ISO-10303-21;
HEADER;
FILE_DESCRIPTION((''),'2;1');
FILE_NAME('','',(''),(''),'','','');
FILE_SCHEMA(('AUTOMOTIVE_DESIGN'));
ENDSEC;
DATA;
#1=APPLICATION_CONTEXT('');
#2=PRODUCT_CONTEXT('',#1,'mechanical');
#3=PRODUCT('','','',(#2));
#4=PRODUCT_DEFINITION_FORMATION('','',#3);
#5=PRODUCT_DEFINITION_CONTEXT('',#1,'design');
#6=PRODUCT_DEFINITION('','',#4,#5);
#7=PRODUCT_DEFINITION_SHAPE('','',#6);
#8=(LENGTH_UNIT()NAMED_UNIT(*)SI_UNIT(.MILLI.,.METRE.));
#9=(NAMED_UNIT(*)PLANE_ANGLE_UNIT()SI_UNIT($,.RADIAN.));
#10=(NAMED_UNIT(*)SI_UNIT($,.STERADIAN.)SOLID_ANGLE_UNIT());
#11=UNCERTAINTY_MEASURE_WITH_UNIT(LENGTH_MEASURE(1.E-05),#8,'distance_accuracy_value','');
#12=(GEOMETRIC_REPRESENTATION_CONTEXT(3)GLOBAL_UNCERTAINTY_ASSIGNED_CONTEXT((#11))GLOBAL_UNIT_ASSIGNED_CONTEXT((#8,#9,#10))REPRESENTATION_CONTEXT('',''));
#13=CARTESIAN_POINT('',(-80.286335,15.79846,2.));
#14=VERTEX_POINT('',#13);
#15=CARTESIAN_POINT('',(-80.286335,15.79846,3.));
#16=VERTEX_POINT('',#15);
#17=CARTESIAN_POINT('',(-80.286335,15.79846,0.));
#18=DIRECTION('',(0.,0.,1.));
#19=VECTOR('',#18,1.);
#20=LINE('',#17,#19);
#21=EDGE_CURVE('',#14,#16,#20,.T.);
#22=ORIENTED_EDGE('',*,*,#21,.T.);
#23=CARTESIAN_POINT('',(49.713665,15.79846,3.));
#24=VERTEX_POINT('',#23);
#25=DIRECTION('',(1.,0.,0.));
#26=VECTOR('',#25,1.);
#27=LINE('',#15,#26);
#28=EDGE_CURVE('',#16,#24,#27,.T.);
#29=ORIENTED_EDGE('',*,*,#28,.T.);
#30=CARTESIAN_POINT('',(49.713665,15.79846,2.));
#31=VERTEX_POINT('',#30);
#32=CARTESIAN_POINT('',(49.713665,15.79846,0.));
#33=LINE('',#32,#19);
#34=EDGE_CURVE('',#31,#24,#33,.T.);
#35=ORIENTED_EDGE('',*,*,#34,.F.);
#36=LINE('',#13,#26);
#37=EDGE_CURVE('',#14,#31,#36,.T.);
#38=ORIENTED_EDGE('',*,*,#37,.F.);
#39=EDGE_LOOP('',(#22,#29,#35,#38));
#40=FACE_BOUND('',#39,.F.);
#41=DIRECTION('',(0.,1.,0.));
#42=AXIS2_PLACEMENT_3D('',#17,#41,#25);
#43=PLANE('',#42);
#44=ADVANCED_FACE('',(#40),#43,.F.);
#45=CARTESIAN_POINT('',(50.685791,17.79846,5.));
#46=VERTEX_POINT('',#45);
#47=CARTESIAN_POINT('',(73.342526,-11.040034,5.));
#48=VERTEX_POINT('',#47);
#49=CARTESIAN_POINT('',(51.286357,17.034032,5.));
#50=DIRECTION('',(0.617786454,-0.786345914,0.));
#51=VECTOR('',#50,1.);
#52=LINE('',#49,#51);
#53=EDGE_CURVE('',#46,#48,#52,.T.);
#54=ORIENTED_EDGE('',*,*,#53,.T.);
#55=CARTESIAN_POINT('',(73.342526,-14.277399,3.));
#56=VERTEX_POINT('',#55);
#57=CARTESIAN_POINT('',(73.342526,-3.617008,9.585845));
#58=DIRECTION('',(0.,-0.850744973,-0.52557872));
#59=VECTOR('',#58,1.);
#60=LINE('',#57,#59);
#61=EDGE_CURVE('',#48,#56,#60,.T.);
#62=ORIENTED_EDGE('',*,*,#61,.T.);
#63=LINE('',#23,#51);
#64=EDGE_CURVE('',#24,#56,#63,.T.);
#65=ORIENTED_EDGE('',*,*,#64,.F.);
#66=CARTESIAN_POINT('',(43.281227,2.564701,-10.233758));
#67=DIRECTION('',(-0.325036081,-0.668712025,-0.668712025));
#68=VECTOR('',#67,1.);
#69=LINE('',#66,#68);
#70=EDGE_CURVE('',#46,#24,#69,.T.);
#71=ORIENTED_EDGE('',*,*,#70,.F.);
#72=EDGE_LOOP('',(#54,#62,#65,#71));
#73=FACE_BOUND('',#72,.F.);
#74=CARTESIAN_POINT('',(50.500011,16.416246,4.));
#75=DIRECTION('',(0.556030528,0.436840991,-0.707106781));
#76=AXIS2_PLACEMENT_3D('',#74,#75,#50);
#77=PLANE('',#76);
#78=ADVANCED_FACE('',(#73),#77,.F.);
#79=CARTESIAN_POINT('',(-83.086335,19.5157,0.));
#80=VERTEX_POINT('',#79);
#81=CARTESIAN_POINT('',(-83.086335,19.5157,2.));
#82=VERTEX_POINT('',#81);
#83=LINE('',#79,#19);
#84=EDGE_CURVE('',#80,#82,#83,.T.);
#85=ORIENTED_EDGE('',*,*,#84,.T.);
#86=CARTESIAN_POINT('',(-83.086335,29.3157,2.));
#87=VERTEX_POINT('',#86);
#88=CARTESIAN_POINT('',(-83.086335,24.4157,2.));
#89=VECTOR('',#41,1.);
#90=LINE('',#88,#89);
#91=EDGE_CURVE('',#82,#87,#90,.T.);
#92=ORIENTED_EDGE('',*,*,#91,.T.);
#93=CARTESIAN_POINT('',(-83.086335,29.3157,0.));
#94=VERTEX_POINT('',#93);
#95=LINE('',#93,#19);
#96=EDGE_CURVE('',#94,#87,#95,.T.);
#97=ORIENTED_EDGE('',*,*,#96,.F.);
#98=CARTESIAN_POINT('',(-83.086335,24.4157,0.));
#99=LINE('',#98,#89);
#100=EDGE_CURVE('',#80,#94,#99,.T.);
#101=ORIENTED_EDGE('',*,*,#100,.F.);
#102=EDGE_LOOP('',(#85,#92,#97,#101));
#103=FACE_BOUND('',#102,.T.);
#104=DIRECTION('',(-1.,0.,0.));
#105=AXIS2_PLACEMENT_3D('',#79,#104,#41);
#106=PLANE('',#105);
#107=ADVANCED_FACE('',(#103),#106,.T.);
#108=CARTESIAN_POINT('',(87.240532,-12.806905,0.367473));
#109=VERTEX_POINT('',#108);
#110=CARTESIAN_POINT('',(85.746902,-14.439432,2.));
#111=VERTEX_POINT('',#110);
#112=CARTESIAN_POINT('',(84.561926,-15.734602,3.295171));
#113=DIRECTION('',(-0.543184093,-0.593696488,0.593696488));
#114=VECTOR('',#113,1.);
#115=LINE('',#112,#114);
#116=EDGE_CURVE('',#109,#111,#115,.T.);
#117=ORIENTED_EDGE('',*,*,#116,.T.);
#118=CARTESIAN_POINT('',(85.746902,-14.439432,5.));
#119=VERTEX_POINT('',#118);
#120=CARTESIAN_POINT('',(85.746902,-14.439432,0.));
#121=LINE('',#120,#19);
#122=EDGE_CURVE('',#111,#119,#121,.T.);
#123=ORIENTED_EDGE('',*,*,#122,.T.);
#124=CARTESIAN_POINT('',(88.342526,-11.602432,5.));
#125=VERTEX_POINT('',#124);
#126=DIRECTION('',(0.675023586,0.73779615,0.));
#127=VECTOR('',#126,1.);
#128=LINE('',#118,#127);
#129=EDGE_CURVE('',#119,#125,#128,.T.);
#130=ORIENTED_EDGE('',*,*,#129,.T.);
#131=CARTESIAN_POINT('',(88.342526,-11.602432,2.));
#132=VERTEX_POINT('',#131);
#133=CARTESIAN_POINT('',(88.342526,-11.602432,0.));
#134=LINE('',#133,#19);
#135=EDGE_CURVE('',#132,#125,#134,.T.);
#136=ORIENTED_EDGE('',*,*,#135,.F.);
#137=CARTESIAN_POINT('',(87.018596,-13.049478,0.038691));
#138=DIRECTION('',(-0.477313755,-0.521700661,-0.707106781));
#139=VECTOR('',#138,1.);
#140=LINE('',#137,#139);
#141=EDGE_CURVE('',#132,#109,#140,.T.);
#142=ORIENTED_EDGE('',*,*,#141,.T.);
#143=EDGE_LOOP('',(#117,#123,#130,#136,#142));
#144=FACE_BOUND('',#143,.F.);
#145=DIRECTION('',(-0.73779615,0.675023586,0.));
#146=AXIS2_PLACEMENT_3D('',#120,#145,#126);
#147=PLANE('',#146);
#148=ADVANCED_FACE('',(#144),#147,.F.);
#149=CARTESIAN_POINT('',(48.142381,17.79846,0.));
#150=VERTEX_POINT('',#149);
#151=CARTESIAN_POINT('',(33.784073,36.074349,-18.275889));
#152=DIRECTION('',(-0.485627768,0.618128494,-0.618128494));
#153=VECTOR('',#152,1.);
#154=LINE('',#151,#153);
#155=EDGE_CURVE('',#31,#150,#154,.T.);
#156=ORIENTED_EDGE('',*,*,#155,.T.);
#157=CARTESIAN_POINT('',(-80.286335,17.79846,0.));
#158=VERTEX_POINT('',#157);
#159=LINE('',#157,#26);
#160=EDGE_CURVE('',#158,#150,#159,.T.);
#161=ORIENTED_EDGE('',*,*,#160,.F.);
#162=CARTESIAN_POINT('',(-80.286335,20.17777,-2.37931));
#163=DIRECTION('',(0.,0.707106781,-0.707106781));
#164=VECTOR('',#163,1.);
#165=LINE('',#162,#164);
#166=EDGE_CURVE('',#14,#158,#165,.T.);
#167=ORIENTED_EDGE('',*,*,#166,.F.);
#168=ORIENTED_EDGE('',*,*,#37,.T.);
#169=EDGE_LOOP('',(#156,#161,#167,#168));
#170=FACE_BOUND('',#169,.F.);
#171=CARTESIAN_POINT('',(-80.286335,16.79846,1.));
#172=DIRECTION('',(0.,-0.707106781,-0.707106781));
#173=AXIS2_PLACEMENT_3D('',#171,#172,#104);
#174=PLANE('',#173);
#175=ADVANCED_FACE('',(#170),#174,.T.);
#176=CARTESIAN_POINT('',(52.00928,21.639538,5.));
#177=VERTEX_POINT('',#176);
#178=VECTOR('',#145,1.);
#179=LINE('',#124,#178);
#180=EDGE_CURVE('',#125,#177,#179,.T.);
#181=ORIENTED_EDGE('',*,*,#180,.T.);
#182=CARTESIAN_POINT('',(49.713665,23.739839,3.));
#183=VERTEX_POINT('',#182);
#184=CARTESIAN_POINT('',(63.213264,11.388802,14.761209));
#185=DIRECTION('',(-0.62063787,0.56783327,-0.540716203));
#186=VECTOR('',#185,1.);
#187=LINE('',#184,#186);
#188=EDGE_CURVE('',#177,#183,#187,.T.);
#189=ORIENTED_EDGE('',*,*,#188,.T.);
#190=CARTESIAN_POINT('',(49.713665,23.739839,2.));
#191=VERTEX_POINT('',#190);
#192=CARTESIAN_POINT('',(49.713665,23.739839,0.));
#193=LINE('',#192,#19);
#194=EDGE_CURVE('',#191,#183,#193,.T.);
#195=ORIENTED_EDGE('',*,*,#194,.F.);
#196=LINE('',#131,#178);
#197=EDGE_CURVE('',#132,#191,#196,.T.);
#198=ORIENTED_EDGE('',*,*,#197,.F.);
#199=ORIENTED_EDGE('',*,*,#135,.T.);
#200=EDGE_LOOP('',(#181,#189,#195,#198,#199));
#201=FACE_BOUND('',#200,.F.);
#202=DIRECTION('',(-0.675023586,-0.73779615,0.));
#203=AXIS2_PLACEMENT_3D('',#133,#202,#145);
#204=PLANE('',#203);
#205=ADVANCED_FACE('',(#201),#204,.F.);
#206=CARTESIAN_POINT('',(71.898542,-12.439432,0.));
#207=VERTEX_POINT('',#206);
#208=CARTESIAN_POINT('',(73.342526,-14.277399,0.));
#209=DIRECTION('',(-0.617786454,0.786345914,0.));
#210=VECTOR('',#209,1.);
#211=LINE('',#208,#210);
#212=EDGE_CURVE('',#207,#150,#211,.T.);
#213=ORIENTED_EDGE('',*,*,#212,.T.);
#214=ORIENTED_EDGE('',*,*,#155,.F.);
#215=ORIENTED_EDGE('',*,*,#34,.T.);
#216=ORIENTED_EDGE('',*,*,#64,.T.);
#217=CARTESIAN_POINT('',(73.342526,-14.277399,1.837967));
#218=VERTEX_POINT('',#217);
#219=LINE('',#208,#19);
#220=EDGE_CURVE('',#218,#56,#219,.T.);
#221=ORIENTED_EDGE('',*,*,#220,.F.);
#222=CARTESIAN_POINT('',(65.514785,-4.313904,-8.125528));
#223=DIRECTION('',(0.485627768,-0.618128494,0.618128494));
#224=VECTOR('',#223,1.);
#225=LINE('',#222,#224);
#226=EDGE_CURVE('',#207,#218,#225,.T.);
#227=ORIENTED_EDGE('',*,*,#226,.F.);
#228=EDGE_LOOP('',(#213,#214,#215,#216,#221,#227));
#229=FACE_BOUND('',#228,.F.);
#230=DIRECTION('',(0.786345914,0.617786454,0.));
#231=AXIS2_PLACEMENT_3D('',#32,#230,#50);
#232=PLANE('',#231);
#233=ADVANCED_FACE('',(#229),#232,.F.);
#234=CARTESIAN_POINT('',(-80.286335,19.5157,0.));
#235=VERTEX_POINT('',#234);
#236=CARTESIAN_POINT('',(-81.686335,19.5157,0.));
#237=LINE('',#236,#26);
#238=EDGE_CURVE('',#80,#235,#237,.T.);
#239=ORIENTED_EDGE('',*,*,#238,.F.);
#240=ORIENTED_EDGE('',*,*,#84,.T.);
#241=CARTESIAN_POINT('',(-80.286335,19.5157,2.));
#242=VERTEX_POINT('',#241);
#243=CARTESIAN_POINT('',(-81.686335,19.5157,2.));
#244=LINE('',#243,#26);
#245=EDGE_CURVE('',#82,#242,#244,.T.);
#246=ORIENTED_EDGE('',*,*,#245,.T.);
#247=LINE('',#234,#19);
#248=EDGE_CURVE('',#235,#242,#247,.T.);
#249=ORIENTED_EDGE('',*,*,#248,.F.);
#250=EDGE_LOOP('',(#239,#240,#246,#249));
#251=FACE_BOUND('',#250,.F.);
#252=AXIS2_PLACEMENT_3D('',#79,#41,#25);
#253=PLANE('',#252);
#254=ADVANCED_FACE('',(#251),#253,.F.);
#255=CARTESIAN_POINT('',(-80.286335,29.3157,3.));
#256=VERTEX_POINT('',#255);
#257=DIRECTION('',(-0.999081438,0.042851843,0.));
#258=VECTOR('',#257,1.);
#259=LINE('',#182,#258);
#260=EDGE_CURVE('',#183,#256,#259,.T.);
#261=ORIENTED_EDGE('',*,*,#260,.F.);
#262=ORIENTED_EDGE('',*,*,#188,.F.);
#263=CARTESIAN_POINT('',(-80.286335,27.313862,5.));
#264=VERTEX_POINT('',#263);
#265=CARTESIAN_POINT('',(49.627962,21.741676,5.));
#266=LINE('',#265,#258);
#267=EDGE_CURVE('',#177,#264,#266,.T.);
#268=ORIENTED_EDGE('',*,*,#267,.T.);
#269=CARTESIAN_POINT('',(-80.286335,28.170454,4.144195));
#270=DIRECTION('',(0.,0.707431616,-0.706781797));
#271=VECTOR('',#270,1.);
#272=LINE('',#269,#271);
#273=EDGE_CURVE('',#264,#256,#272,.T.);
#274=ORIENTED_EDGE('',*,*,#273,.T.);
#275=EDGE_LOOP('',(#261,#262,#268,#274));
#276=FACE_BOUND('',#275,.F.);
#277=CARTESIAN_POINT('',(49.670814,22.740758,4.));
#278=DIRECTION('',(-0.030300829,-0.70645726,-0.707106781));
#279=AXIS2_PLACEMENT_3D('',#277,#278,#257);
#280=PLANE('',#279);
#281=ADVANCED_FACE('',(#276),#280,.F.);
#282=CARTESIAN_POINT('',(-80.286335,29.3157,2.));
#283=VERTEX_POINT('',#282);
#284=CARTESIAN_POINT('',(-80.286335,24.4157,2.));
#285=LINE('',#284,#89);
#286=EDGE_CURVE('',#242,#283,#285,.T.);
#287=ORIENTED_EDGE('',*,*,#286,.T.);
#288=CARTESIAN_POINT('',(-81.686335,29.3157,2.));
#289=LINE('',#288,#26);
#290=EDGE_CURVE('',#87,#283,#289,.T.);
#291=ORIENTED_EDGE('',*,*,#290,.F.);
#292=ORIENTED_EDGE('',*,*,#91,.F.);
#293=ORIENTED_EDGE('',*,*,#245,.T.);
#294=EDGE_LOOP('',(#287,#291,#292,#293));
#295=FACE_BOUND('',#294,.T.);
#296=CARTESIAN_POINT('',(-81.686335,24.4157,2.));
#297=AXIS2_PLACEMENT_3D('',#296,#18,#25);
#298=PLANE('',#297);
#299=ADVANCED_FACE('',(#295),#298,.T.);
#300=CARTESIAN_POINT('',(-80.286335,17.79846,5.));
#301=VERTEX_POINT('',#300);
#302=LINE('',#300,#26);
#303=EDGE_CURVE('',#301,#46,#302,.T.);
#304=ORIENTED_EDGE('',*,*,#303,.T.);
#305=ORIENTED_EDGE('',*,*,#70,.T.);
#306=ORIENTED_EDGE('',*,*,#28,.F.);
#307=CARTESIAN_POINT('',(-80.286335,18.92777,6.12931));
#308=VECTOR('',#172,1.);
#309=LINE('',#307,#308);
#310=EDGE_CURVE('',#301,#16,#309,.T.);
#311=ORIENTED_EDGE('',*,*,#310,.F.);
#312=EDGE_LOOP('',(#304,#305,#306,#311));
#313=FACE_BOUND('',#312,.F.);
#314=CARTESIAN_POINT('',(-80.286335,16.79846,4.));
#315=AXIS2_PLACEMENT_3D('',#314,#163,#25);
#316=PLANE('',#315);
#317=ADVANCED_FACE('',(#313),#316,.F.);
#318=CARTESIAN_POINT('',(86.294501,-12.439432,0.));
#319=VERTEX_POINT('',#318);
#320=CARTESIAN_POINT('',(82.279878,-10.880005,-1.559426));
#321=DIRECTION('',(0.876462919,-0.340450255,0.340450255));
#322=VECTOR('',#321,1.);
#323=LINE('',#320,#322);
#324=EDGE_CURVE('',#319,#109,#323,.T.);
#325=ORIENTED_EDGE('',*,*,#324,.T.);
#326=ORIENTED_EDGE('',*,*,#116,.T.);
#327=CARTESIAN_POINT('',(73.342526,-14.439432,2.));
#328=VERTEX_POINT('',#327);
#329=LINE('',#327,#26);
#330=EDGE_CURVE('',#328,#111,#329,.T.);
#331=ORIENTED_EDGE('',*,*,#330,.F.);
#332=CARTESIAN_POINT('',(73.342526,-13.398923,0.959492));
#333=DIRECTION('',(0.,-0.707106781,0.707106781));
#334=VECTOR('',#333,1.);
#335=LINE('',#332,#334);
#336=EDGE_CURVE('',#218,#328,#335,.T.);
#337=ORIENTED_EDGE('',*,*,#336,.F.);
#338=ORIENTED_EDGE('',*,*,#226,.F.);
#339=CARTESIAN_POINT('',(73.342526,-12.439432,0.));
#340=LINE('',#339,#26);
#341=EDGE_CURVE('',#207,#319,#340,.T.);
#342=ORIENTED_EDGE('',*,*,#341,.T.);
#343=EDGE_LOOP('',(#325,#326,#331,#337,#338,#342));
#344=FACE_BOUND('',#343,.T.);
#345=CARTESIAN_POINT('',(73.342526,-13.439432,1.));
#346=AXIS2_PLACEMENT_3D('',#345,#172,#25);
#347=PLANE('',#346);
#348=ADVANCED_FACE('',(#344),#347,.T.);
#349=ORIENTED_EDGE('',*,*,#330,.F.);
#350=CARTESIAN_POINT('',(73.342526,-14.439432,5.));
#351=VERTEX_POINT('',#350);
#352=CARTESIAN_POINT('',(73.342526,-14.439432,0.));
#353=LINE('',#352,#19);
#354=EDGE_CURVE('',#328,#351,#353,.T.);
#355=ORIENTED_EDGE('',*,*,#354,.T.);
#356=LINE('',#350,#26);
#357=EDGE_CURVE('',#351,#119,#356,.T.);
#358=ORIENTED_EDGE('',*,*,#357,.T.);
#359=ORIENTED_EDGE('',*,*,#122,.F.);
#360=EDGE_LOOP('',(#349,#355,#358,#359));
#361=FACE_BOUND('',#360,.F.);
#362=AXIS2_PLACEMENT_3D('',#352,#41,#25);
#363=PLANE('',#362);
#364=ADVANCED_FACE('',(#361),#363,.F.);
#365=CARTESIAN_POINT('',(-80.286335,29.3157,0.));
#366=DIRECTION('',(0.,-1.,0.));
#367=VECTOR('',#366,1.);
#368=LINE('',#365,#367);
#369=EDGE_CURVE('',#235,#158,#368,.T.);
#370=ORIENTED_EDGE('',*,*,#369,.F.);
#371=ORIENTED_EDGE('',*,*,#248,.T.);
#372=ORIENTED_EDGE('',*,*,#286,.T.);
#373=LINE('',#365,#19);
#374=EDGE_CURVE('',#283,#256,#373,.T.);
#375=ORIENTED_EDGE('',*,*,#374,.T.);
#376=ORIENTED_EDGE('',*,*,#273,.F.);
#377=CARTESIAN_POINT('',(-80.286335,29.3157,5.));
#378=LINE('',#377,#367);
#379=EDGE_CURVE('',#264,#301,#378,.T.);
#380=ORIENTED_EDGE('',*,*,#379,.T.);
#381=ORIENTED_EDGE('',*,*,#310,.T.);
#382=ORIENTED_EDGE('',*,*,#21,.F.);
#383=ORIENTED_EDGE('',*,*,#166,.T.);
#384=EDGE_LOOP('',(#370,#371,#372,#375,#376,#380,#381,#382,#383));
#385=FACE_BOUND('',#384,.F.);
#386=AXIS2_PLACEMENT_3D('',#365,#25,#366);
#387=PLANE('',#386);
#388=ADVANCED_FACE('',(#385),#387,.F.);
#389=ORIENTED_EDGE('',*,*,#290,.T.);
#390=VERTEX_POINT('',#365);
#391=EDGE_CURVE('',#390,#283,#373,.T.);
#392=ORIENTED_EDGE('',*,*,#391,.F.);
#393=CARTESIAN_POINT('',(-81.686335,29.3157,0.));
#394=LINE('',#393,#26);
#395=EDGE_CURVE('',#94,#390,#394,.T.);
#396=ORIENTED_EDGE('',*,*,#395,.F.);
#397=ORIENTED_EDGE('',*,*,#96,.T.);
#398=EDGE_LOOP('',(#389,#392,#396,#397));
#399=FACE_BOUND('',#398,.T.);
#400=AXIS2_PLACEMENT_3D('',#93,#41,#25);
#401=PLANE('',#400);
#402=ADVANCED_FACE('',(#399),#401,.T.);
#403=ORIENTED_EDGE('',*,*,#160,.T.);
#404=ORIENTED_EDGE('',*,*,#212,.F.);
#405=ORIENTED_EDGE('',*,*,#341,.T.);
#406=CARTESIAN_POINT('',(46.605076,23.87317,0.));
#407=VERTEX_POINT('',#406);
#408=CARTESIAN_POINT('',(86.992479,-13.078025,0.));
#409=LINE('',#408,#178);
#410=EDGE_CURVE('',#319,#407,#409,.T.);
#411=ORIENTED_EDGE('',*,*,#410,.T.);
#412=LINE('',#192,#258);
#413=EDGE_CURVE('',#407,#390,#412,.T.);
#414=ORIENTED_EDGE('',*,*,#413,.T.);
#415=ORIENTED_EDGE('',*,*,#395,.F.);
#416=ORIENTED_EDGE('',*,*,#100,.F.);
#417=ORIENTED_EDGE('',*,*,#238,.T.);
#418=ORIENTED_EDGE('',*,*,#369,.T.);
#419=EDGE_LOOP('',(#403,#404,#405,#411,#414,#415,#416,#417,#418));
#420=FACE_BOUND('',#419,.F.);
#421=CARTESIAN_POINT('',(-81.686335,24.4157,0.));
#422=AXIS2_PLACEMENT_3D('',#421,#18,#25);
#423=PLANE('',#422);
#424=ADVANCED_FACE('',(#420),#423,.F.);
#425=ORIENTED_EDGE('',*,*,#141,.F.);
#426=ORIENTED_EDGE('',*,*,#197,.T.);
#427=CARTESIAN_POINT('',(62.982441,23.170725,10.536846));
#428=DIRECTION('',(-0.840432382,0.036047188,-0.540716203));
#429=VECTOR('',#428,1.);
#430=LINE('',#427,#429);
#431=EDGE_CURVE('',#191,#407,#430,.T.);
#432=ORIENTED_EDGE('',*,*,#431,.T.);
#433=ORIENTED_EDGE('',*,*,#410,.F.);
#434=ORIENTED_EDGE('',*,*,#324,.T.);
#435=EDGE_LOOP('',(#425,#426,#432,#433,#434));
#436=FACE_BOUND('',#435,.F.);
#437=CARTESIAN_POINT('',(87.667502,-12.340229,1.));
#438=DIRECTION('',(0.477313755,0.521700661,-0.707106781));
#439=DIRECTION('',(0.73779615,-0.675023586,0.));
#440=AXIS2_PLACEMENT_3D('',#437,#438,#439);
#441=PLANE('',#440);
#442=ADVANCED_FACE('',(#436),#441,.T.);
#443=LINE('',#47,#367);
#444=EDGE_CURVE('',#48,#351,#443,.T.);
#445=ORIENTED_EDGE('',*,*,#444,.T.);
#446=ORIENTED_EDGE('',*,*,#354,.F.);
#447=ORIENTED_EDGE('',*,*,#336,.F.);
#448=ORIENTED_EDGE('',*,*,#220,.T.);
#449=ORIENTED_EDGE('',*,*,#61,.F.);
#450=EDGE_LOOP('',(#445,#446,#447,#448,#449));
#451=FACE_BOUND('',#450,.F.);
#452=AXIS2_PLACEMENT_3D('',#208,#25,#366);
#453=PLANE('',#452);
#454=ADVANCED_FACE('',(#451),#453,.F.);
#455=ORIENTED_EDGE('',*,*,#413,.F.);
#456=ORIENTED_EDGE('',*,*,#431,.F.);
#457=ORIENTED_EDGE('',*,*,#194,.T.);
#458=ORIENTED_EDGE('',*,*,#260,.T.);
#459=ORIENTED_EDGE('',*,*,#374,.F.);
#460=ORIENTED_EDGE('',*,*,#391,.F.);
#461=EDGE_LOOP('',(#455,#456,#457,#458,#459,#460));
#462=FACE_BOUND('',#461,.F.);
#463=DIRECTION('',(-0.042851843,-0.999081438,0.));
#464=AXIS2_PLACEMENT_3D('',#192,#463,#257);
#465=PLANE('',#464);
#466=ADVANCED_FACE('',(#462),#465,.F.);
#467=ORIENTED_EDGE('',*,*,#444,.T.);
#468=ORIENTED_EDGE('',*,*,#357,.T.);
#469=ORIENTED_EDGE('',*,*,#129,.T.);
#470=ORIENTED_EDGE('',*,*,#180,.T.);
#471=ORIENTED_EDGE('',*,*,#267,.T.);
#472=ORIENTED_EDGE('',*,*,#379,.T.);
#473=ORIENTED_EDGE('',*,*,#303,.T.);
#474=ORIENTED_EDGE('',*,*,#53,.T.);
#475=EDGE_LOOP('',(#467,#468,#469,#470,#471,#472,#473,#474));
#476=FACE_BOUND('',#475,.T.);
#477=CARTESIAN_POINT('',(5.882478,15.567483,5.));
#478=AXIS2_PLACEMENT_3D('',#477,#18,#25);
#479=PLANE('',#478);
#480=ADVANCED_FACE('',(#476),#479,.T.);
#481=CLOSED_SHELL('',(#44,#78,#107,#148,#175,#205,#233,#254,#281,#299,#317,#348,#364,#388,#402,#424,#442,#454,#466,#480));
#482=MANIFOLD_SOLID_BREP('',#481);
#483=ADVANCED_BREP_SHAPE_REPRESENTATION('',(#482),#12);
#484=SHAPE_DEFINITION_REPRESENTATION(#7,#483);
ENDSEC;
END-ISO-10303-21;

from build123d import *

# Parameters (mm, degrees)
F1_DEPTH = 5
F2_SIZE  = 2
F0_W     = 2.8
F0_H     = 9.8
F3_DEPTH = 2


# Not quite as in the source:
# - a feature of the source that left no trace in its solid (it failed there, or was rolled back) is left out


with BuildPart() as f1:
    # F0 (on Top) → F1 (new body)
    with BuildSketch(Plane.XY):
        Polygon((49.7136654785, 23.7398390386), (-80.2863345215, 29.3157004521), (-80.2863345215, 19.5157004521), (-80.2863345215, 15.7984595098), (49.7136654785, 15.7984595098), (73.3425258757, -14.2773987355), (73.3425258757, -14.4394316876), (85.7469019117, -14.4394316876), (88.3425258757, -11.6024324968), align=None)
    extrude(amount=F1_DEPTH)

    # F2 (call 1 of 5: OpenCascade refuses the feature's edges together)
    f2_edges = [f1.edges().sort_by_distance(p)[0] for p in [
        (-15.286335, 15.79846, 0),
    ]]
    chamfer(f2_edges, length=F2_SIZE)

    # F2#2 (call 2 of 5)
    f2_2_edges = [f1.edges().sort_by_distance(p)[0] for p in [
        (69.028096, 6.068703, 0),
    ]]
    chamfer(f2_2_edges, length=F2_SIZE)

    # F2#3 (call 3 of 5)
    f2_3_edges = [f1.edges().sort_by_distance(p)[0] for p in [
        (79.544714, -14.439432, 0),
    ]]
    chamfer(f2_3_edges, length=F2_SIZE)

    # F2#4 (call 4 of 5)
    f2_4_edges = [f1.edges().sort_by_distance(p)[0] for p in [
        (61.528096, 0.76053, 5),
        (-15.286335, 15.79846, 5),
    ]]
    chamfer(f2_4_edges, length=F2_SIZE)

    # F2#5 (call 5 of 5)
    f2_5_edges = [f1.edges().sort_by_distance(p)[0] for p in [
        (-15.286335, 26.52777, 5),
    ]]
    chamfer(f2_5_edges, length=F2_SIZE)

    # F0 (on Top) → F3 (join)
    with BuildSketch(Plane.XY):
        with Locations((-81.6863345215, 24.4157004521)):
            Rectangle(F0_W, F0_H)
    extrude(amount=F3_DEPTH)


solid = f1.part
